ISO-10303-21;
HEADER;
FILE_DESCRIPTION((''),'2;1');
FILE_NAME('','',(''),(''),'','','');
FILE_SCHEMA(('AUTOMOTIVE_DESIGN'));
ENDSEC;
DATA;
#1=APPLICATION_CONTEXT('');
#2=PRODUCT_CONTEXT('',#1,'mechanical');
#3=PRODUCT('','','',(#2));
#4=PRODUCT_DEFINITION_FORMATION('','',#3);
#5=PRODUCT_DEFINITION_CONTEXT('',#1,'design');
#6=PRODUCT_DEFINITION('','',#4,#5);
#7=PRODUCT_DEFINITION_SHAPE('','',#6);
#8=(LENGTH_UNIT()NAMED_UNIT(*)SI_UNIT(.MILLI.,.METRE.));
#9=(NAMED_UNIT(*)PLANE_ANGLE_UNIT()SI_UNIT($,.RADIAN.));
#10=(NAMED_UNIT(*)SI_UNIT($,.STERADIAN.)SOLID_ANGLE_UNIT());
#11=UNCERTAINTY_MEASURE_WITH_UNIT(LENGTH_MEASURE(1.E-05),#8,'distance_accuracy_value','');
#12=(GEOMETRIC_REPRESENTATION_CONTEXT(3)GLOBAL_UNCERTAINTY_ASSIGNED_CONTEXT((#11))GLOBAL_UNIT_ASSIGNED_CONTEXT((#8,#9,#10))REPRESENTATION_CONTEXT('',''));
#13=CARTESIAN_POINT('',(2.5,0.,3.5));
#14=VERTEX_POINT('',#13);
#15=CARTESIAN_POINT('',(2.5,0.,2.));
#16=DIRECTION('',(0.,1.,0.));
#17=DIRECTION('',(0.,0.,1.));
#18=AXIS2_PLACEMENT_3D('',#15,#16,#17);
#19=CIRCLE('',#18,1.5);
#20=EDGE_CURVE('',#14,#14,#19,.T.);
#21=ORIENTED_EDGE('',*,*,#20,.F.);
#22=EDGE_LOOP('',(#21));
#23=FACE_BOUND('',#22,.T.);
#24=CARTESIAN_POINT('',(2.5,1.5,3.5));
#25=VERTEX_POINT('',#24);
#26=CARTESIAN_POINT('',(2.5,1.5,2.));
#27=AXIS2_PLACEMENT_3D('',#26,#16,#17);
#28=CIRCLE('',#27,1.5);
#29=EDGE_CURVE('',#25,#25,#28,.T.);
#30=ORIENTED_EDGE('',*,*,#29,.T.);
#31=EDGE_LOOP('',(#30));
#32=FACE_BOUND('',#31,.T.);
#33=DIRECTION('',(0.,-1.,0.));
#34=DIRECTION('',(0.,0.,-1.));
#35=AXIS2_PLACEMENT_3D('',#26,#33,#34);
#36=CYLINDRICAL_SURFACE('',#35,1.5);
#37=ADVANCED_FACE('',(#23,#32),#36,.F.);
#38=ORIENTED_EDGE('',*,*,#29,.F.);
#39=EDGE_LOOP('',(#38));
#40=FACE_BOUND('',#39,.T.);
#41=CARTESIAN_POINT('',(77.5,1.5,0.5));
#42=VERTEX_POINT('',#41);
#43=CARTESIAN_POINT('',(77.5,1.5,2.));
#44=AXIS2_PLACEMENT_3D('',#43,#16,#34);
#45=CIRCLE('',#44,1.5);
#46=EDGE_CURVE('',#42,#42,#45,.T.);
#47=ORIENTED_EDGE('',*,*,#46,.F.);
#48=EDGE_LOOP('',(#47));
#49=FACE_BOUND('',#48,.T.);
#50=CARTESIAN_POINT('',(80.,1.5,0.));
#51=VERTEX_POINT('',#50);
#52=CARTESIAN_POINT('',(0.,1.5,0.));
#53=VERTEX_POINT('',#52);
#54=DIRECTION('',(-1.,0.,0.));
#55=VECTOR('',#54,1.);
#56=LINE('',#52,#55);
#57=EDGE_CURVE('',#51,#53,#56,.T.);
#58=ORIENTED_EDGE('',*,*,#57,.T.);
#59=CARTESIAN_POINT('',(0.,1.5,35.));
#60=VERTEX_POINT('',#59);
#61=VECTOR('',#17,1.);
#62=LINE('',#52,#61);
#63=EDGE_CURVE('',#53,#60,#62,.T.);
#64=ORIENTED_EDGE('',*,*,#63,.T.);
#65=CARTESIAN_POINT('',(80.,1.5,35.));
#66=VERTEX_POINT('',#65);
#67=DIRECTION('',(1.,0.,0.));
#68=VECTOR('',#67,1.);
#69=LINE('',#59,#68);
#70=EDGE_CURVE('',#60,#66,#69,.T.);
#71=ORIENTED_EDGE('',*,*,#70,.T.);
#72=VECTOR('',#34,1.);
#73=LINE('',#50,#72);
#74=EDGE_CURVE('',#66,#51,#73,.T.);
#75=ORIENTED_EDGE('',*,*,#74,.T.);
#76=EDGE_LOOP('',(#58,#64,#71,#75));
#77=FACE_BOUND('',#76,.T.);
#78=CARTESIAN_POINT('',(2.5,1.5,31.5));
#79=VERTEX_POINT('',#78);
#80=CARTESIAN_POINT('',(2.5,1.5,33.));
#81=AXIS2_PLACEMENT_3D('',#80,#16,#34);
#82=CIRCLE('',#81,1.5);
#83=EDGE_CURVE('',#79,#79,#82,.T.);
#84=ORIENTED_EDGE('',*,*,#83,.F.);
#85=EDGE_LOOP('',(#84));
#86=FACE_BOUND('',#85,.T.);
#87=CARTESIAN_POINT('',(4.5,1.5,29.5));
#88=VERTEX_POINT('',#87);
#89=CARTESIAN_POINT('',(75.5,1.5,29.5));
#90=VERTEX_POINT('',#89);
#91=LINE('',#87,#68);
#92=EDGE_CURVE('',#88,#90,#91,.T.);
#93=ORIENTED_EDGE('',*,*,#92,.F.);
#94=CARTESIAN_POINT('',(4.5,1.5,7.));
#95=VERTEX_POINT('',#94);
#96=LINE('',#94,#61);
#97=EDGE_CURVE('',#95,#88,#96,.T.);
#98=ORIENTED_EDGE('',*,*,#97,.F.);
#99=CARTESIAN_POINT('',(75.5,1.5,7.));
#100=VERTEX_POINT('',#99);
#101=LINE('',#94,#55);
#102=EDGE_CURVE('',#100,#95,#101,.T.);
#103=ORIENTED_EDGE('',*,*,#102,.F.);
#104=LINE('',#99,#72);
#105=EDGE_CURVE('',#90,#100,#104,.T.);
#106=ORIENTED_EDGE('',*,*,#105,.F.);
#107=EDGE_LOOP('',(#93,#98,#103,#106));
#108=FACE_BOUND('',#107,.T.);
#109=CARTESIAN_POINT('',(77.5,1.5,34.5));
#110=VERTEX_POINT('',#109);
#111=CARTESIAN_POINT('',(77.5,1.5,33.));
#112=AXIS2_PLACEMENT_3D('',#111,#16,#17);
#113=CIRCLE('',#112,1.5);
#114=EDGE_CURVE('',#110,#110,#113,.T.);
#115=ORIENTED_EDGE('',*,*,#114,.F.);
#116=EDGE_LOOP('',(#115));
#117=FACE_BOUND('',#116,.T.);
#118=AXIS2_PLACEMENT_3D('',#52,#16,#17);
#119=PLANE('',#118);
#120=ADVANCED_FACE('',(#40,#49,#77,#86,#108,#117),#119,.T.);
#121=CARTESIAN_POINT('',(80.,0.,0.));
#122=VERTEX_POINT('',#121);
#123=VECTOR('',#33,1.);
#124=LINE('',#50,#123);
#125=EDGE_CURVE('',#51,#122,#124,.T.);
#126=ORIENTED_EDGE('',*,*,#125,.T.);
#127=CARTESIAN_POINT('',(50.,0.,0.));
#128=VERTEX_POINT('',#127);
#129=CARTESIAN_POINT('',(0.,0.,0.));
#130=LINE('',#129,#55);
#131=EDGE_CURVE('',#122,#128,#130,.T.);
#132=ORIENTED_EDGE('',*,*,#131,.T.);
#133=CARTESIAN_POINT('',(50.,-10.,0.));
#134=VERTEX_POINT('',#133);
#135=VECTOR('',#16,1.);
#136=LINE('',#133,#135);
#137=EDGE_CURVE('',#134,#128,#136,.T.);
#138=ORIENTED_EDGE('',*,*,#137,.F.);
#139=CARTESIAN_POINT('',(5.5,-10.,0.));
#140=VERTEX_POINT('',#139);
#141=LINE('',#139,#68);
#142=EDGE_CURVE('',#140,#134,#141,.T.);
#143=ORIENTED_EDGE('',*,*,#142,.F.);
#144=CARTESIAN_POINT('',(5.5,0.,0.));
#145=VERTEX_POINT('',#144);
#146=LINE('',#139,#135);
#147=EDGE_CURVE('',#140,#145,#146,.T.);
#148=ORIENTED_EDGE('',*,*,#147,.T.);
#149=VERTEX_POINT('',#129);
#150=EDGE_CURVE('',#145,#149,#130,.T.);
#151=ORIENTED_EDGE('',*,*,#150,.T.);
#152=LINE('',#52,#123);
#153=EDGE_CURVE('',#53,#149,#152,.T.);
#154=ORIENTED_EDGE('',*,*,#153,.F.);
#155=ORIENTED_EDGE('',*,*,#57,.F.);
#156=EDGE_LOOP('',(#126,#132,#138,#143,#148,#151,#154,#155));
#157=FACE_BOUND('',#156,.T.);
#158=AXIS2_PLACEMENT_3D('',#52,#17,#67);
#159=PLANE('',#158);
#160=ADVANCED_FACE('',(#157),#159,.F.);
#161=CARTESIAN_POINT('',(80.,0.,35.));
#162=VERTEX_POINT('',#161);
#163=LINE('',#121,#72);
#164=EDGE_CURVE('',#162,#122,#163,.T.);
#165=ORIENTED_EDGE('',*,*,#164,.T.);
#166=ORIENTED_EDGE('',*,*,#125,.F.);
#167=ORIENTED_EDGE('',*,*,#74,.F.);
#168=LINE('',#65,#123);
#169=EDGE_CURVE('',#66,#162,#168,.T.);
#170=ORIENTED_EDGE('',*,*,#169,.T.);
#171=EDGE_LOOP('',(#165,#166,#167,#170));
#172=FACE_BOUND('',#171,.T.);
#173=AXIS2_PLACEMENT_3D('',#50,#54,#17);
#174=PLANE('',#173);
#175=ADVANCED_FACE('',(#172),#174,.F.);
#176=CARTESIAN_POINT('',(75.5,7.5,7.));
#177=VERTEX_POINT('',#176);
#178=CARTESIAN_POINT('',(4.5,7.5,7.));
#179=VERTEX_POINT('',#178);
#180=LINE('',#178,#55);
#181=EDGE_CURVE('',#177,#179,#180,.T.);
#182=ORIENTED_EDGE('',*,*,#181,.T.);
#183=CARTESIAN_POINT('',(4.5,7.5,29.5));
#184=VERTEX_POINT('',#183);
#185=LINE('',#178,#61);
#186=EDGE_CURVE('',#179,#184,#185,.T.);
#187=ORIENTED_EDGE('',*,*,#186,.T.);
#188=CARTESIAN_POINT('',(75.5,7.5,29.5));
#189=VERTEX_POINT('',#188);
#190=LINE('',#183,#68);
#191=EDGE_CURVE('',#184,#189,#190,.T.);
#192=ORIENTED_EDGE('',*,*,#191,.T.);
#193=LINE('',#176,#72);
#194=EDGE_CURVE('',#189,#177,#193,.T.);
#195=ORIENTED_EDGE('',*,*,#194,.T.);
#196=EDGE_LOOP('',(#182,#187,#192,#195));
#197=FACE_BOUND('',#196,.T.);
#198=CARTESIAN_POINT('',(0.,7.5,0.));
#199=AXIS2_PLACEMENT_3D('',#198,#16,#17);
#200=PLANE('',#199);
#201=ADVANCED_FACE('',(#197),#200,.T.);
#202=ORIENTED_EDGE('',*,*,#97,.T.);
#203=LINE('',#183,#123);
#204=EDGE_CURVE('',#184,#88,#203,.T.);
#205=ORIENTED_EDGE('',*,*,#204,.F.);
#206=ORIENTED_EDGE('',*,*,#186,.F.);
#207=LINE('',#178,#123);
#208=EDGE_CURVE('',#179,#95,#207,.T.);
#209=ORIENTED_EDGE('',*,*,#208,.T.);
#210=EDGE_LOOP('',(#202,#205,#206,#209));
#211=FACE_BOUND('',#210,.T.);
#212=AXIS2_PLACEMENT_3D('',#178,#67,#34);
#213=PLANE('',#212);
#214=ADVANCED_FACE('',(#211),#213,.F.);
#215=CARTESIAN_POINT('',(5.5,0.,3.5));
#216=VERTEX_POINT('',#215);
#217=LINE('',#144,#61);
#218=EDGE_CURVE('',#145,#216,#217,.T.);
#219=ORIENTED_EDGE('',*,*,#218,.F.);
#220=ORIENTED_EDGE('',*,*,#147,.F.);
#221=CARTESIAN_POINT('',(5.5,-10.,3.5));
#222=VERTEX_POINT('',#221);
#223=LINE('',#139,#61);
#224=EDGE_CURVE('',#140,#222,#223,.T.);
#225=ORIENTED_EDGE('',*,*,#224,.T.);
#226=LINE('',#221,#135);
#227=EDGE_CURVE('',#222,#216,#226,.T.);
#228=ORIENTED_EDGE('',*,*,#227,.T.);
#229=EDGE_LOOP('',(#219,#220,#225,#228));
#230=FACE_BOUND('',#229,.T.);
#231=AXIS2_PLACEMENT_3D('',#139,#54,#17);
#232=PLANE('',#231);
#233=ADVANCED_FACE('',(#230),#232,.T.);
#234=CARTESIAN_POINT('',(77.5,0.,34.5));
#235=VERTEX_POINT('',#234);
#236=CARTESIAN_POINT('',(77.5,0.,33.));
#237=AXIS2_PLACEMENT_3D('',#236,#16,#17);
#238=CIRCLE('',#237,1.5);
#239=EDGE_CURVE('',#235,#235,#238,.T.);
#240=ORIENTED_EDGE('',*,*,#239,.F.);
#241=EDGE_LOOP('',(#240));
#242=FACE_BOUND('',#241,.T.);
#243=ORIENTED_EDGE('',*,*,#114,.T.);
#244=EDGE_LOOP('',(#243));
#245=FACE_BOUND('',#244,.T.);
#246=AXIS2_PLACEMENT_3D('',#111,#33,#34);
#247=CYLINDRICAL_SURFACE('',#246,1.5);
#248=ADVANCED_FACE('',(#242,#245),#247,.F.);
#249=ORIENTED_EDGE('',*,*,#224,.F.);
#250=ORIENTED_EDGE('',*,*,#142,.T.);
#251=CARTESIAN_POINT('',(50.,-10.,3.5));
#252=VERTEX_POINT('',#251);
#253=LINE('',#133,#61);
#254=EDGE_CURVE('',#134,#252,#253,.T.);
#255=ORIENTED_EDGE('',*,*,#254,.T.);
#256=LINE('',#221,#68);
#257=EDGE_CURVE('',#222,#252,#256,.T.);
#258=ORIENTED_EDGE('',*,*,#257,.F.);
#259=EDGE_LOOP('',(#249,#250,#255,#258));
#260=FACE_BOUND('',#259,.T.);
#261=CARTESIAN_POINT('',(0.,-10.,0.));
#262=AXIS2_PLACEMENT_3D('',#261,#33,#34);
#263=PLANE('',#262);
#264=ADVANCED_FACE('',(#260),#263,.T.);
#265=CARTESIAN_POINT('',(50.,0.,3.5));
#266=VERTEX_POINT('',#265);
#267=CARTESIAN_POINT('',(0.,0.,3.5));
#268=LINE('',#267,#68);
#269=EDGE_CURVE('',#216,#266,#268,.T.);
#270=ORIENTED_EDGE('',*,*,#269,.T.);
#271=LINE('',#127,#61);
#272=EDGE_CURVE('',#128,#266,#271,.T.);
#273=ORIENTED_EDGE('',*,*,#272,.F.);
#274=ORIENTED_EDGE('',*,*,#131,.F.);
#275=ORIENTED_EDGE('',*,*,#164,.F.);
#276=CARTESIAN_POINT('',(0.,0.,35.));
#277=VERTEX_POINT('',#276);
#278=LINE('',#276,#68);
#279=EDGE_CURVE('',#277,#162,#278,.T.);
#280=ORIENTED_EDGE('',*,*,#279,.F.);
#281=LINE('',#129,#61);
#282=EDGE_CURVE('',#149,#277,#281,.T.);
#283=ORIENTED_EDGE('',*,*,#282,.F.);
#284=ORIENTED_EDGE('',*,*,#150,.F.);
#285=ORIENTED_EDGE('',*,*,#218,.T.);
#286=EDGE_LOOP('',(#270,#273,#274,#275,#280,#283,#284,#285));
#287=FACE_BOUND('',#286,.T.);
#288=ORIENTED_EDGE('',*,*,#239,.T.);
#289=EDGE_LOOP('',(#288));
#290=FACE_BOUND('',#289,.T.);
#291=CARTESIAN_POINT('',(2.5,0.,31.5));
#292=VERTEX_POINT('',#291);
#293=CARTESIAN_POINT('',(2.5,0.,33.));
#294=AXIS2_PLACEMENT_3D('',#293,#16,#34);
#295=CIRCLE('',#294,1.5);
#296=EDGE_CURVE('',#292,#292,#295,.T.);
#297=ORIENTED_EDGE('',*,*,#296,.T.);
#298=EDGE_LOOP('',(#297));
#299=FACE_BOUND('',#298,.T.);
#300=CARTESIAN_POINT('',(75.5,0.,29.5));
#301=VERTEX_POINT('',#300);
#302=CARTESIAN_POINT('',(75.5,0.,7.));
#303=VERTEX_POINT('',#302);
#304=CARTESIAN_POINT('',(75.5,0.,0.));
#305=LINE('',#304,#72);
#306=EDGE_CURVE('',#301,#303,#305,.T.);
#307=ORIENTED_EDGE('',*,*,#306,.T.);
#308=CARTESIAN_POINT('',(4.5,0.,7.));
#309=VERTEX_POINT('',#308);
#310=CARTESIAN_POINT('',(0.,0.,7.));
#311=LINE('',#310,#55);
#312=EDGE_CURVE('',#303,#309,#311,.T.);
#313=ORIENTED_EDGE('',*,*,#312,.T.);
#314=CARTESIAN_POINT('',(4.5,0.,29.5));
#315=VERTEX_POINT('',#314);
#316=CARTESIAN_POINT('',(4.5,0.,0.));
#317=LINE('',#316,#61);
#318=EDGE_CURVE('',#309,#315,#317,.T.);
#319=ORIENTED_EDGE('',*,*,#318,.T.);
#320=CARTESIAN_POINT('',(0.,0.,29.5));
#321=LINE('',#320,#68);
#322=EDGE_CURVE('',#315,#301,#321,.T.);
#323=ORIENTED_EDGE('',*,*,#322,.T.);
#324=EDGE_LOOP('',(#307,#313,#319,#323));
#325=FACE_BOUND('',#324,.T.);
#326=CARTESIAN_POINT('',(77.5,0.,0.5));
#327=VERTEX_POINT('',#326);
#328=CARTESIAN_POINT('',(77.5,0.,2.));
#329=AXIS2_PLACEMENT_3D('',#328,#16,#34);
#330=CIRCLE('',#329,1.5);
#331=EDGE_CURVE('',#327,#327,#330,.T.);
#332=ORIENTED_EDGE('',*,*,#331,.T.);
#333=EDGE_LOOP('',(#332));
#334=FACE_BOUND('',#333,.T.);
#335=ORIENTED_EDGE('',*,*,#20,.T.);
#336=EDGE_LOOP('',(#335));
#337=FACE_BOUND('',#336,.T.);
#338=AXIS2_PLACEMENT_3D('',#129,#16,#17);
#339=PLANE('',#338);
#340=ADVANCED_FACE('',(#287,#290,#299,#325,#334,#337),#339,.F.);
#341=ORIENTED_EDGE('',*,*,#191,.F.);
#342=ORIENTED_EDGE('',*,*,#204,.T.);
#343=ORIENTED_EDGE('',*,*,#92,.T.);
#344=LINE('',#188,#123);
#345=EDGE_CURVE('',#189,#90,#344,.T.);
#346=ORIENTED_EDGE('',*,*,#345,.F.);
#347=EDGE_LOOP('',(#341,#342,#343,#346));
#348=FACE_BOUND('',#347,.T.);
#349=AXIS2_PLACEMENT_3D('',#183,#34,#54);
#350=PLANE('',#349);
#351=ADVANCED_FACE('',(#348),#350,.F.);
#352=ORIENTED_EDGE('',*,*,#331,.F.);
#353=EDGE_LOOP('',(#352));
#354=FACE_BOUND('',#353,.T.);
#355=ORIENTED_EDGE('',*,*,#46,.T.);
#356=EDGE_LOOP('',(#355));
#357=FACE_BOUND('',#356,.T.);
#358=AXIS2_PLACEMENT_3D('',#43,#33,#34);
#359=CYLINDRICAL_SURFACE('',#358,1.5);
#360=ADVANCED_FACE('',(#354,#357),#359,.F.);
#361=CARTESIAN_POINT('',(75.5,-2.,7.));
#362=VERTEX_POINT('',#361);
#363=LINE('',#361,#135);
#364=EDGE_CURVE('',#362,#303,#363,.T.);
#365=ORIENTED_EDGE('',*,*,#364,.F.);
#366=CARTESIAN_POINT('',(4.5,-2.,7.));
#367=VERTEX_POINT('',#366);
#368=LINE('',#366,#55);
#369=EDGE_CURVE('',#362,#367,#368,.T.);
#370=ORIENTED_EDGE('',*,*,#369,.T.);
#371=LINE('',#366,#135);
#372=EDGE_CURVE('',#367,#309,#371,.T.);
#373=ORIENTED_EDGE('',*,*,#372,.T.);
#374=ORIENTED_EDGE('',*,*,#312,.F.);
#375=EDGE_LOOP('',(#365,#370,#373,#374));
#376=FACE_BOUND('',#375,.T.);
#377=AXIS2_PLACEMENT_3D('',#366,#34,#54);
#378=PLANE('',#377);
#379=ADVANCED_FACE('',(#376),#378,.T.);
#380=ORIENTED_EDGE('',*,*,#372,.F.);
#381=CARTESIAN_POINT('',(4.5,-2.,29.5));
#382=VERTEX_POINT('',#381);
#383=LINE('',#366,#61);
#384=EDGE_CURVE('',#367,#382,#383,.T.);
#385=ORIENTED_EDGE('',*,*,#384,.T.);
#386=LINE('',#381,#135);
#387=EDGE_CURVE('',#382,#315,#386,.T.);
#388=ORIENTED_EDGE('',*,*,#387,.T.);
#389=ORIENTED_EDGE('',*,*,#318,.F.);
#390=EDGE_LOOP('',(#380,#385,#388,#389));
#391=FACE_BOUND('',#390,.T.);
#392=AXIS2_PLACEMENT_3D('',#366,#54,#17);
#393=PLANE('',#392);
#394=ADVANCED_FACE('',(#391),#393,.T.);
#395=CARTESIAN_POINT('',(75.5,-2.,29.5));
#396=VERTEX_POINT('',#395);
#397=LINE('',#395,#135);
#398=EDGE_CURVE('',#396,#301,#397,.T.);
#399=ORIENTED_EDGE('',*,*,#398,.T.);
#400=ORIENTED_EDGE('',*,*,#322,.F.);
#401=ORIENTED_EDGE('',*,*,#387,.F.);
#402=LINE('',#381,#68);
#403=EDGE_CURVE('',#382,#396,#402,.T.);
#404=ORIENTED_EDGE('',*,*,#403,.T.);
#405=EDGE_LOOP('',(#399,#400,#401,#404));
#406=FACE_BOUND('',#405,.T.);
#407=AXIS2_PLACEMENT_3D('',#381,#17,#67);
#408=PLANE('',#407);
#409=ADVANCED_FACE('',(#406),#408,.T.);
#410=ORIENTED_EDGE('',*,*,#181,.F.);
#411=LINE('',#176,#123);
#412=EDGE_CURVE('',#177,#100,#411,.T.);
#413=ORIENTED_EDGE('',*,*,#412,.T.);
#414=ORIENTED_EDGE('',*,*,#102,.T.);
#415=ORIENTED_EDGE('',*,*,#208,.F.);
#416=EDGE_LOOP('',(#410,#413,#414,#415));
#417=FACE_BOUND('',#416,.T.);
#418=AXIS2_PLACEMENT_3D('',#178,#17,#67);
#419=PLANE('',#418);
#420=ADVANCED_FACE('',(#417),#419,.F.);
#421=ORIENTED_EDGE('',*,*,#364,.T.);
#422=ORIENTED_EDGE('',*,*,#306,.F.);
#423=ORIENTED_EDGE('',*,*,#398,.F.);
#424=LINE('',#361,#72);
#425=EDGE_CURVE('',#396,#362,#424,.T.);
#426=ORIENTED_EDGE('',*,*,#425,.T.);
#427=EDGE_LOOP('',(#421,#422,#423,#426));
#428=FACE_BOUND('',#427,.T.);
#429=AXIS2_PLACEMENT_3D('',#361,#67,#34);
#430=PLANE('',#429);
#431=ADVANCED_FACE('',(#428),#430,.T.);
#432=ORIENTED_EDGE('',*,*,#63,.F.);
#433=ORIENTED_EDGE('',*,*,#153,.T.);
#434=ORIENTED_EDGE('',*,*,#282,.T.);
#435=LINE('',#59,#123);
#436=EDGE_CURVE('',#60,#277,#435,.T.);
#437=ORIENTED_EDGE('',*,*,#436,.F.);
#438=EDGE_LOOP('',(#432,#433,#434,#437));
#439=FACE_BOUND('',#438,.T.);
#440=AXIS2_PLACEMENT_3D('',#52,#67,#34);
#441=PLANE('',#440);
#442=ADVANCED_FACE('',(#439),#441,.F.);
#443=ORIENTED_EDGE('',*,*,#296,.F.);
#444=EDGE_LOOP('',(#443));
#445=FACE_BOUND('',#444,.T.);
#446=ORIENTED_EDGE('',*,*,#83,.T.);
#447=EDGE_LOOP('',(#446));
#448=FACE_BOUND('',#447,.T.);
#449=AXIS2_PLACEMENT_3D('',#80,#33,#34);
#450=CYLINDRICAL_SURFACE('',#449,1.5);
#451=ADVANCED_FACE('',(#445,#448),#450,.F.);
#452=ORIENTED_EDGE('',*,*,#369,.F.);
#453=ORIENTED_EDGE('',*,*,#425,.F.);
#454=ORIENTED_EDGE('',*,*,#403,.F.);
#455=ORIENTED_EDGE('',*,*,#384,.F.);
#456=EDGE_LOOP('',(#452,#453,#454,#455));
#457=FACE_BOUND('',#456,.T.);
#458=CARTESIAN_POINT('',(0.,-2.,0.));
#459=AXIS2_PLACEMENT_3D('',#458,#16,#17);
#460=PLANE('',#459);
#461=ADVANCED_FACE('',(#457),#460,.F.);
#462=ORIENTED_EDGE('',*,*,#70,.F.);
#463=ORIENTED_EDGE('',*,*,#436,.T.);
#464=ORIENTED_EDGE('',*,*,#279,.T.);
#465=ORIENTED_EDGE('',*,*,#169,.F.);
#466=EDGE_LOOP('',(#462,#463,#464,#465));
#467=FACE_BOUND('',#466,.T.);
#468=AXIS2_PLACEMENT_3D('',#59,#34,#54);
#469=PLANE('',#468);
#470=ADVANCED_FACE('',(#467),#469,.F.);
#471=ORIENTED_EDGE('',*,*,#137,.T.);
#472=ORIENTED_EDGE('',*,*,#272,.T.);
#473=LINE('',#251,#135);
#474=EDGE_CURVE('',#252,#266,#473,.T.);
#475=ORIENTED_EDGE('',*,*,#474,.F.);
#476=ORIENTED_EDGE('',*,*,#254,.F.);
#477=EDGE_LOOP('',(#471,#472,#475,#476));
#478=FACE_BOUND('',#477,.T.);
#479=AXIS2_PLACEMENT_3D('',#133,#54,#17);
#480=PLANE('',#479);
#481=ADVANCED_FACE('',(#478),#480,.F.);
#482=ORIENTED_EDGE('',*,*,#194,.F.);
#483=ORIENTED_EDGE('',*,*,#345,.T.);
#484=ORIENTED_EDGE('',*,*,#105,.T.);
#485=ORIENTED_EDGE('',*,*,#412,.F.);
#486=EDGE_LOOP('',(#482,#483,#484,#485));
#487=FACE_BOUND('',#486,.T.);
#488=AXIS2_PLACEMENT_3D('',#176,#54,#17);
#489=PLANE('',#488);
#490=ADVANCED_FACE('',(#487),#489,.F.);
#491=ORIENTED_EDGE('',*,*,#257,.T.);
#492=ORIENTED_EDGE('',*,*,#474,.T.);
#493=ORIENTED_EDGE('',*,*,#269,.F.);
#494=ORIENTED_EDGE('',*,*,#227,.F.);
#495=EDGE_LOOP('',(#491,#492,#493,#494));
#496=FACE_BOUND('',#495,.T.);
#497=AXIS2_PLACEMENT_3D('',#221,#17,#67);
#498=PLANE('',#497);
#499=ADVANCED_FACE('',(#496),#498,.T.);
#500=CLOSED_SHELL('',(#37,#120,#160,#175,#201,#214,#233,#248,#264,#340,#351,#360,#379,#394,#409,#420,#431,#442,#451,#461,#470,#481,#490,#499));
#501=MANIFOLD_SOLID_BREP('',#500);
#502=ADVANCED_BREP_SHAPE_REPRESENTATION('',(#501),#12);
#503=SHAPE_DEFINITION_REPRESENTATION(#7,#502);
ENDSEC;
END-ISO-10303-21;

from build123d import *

# Parameters (mm, degrees)
SKETCH_1_W            = 80
SKETCH_1_H            = 35
SKETCH_1_R            = 1.5
EXTRUDE_1_DEPTH       = 1.5
EXTRUDE_START         = 7
EXTRUDE_2_OUTLINE_W   = 71
EXTRUDE_2_OUTLINE_H   = 6
EXTRUDE_2_OUTLINE_H_2 = 2
EXTRUDE_2_DEPTH       = 22.5
EXTRUDE_2_2_OUTLINE_W = 44.5
EXTRUDE_2_2_OUTLINE_H = 10
EXTRUDE_2_2_DEPTH     = 3.5


# Read off the part's stored shape, not the designer's step: Бобышка-Вытянуть2
with BuildPart() as part:
    # Эскиз1 (on Top Plane) → Бобышка-Вытянуть1 (new body)
    with BuildSketch(Plane(origin=(0, 0, 0), x_dir=(1, 0, 0), z_dir=(0, 1, 0))):
        with Locations((40, -17.5)):
            Rectangle(SKETCH_1_W, SKETCH_1_H)
        with Locations(Location((2.5, -2, 0), (0, 0, 270))):
            Circle(SKETCH_1_R, mode=Mode.SUBTRACT)
        with Locations(Location((77.5, -2, 0), (0, 0, 90))):
            Circle(SKETCH_1_R, mode=Mode.SUBTRACT)
        with Locations(Location((77.5, -33, 0), (0, 0, 270))):
            Circle(SKETCH_1_R, mode=Mode.SUBTRACT)
        with Locations(Location((2.5, -33, 0), (0, 0, 90))):
            Circle(SKETCH_1_R, mode=Mode.SUBTRACT)
    extrude(amount=EXTRUDE_1_DEPTH)

    # Бобышка-Вытянуть2 outline → Бобышка-Вытянуть2 (add)
    with BuildSketch(Plane.XY.offset(EXTRUDE_START)):
        with Locations((40, 4.5)):
            Rectangle(EXTRUDE_2_OUTLINE_W, EXTRUDE_2_OUTLINE_H)
        with Locations((40, -1)):
            Rectangle(EXTRUDE_2_OUTLINE_W, EXTRUDE_2_OUTLINE_H_2)
    extrude(amount=EXTRUDE_2_DEPTH)

    # Extrude 2 2 outline → Extrude 2 2 (add)
    with BuildSketch(Plane.XY):
        with Locations((27.75, -5)):
            Rectangle(EXTRUDE_2_2_OUTLINE_W, EXTRUDE_2_2_OUTLINE_H)
    extrude(amount=EXTRUDE_2_2_DEPTH)


solid = part.part
